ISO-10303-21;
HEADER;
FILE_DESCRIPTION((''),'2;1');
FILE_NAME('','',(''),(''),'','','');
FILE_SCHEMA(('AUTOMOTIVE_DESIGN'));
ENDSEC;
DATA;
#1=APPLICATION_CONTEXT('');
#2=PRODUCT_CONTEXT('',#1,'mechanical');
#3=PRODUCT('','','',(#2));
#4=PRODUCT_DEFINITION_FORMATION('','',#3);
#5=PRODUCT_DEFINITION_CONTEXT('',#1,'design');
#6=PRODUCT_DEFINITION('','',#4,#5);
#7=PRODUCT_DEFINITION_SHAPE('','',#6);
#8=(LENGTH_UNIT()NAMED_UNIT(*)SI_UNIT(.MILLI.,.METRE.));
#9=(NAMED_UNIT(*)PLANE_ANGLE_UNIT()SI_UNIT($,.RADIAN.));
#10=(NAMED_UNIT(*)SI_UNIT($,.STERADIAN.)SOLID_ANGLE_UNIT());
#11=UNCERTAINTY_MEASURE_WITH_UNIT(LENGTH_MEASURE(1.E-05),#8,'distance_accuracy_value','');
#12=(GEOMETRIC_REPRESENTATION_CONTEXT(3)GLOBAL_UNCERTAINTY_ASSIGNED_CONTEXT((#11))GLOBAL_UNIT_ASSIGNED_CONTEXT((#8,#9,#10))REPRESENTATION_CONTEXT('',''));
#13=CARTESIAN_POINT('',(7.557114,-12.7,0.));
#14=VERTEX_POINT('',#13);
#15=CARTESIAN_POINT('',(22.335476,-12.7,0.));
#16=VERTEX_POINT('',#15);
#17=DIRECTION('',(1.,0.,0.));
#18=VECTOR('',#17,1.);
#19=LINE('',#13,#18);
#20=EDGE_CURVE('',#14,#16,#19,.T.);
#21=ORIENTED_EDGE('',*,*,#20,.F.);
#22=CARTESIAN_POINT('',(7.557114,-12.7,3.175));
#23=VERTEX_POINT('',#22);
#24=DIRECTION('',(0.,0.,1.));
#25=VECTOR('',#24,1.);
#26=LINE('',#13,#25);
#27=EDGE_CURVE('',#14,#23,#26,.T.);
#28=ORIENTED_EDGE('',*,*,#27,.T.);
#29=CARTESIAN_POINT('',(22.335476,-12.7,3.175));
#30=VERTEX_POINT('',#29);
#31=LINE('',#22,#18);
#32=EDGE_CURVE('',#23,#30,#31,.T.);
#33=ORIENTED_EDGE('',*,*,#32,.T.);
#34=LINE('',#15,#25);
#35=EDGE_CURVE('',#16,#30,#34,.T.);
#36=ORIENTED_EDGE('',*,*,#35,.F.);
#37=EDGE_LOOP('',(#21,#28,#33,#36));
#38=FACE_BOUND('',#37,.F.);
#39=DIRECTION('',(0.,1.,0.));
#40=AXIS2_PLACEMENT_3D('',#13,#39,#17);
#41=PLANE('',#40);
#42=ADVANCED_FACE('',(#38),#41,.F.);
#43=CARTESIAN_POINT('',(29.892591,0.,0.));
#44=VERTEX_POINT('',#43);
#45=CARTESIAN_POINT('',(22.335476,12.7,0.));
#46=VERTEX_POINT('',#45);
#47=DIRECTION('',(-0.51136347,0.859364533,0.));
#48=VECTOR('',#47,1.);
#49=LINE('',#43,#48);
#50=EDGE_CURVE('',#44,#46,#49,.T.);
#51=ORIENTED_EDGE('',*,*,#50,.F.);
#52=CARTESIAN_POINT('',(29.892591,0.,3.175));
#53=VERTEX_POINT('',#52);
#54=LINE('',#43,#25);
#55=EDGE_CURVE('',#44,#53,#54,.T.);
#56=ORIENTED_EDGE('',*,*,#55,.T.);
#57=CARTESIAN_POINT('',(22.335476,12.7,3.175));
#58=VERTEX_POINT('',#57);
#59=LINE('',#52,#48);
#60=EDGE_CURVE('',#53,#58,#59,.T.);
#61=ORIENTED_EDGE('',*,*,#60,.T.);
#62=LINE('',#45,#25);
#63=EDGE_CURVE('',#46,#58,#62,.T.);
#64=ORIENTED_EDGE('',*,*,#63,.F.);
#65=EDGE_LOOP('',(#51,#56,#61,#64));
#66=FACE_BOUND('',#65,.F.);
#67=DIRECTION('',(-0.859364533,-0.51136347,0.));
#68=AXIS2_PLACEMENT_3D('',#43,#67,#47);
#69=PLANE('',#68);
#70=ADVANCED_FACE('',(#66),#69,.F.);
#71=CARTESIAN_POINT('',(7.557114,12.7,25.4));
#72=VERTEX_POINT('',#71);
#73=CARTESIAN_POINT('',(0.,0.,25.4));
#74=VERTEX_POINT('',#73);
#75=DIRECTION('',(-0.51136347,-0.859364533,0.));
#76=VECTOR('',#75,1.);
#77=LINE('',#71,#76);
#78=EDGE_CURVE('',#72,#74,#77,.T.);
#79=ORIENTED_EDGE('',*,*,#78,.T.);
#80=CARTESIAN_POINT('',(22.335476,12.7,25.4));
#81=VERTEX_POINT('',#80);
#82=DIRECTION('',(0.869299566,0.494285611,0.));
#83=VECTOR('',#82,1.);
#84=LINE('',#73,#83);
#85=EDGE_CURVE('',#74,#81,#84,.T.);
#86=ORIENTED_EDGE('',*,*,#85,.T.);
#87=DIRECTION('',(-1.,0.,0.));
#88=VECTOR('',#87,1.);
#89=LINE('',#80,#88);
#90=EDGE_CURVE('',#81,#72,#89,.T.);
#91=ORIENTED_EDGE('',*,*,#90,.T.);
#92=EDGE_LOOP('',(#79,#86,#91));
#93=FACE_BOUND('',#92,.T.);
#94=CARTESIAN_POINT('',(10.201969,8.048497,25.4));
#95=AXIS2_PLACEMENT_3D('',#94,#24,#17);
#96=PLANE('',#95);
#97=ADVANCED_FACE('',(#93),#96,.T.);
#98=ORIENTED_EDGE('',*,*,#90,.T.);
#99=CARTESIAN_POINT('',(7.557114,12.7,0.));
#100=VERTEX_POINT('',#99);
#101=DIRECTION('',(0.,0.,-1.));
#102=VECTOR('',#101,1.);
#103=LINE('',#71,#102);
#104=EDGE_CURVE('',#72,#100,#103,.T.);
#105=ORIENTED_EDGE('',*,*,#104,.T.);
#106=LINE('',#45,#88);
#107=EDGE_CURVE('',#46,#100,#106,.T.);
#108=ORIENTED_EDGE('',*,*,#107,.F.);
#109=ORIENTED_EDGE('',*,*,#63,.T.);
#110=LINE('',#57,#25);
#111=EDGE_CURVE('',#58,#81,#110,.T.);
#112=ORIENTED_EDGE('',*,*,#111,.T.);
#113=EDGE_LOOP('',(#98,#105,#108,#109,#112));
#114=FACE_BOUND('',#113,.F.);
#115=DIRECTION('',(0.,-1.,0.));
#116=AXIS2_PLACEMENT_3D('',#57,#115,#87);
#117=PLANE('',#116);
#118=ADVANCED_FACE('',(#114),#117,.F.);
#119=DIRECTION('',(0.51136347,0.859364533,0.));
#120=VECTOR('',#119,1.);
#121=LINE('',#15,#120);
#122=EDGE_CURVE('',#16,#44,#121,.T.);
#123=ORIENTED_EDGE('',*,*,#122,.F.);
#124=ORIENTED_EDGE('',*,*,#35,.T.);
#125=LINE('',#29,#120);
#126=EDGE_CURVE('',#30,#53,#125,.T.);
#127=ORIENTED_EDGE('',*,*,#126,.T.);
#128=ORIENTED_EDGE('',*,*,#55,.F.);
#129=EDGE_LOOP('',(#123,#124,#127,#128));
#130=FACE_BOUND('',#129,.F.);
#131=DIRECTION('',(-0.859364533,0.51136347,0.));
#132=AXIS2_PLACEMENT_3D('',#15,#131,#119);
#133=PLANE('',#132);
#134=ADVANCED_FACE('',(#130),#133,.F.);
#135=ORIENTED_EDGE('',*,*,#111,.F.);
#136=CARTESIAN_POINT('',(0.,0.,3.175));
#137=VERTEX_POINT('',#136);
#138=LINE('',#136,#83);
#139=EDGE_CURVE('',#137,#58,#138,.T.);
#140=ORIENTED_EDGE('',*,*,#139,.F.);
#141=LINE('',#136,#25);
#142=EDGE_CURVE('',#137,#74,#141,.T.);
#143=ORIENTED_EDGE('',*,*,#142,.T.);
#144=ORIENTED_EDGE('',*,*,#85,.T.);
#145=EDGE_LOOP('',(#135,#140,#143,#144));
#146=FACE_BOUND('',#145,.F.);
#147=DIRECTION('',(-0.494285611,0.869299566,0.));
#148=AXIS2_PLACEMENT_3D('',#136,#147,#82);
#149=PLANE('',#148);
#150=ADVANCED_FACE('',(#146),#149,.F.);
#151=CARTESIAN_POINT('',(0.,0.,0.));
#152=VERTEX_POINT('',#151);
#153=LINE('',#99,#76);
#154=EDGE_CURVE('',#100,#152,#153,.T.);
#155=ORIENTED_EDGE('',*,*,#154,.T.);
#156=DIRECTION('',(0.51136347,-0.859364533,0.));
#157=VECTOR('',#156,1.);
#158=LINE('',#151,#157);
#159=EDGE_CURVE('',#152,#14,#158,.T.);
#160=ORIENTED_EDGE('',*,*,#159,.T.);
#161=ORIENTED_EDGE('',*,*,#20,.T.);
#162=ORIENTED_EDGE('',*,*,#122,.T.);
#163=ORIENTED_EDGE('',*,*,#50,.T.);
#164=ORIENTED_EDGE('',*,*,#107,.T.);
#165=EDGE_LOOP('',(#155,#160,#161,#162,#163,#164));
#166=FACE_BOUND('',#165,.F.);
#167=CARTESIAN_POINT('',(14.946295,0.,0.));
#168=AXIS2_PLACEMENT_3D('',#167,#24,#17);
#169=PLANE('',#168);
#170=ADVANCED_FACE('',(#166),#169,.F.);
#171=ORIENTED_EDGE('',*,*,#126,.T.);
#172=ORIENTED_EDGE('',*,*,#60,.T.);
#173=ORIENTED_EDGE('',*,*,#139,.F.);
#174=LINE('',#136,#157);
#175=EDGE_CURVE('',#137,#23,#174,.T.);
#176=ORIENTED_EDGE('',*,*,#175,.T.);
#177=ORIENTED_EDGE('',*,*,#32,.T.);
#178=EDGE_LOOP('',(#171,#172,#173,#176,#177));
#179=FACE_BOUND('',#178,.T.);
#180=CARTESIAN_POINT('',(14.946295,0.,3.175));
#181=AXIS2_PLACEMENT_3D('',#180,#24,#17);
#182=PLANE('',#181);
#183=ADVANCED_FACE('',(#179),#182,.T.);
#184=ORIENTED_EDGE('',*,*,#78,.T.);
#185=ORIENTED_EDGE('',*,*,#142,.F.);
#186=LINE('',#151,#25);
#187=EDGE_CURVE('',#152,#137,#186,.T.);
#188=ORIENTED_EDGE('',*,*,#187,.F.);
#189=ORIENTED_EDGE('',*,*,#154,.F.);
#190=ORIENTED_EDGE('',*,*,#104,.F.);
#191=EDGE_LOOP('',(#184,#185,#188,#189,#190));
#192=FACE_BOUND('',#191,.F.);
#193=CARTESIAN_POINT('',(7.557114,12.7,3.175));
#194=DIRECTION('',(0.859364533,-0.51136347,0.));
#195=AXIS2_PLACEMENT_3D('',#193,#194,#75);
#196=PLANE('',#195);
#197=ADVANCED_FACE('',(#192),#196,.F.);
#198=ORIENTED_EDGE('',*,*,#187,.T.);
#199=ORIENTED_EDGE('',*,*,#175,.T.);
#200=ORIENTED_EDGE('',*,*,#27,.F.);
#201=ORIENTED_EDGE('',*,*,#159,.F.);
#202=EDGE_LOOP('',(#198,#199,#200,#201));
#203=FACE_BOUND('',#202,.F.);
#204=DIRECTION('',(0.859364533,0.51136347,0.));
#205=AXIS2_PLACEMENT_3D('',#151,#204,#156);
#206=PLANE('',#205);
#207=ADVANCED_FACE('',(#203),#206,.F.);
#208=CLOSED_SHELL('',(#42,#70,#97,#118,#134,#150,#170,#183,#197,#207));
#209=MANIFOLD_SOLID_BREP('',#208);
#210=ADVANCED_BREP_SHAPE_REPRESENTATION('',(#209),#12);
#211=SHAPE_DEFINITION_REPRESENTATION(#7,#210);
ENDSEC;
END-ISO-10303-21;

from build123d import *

# Parameters (mm, degrees)
F1_DEPTH = 3.175
F3_DEPTH = 22.225


# Not quite as in the source:
# - a feature names something its author has since deleted; it is built from what else it names


with BuildPart() as f1:
    # F0 (on Top) → F1 (new body)
    with BuildSketch(Plane.XY):
        Polygon((7.557114383, 12.7), (0, 0), (7.557114383, -12.7), (22.3354761934, -12.7), (29.8925905764, 0), (22.3354761934, 12.7), align=None)
    extrude(amount=F1_DEPTH)

    # F2 (on face) → F3 (join)
    with BuildSketch(Plane.XY.offset(3.175)):
        Polygon((7.557114383, 12.7), (0, 0), (22.3354761934, 12.7), align=None)
    extrude(amount=F3_DEPTH)


solid = f1.part
